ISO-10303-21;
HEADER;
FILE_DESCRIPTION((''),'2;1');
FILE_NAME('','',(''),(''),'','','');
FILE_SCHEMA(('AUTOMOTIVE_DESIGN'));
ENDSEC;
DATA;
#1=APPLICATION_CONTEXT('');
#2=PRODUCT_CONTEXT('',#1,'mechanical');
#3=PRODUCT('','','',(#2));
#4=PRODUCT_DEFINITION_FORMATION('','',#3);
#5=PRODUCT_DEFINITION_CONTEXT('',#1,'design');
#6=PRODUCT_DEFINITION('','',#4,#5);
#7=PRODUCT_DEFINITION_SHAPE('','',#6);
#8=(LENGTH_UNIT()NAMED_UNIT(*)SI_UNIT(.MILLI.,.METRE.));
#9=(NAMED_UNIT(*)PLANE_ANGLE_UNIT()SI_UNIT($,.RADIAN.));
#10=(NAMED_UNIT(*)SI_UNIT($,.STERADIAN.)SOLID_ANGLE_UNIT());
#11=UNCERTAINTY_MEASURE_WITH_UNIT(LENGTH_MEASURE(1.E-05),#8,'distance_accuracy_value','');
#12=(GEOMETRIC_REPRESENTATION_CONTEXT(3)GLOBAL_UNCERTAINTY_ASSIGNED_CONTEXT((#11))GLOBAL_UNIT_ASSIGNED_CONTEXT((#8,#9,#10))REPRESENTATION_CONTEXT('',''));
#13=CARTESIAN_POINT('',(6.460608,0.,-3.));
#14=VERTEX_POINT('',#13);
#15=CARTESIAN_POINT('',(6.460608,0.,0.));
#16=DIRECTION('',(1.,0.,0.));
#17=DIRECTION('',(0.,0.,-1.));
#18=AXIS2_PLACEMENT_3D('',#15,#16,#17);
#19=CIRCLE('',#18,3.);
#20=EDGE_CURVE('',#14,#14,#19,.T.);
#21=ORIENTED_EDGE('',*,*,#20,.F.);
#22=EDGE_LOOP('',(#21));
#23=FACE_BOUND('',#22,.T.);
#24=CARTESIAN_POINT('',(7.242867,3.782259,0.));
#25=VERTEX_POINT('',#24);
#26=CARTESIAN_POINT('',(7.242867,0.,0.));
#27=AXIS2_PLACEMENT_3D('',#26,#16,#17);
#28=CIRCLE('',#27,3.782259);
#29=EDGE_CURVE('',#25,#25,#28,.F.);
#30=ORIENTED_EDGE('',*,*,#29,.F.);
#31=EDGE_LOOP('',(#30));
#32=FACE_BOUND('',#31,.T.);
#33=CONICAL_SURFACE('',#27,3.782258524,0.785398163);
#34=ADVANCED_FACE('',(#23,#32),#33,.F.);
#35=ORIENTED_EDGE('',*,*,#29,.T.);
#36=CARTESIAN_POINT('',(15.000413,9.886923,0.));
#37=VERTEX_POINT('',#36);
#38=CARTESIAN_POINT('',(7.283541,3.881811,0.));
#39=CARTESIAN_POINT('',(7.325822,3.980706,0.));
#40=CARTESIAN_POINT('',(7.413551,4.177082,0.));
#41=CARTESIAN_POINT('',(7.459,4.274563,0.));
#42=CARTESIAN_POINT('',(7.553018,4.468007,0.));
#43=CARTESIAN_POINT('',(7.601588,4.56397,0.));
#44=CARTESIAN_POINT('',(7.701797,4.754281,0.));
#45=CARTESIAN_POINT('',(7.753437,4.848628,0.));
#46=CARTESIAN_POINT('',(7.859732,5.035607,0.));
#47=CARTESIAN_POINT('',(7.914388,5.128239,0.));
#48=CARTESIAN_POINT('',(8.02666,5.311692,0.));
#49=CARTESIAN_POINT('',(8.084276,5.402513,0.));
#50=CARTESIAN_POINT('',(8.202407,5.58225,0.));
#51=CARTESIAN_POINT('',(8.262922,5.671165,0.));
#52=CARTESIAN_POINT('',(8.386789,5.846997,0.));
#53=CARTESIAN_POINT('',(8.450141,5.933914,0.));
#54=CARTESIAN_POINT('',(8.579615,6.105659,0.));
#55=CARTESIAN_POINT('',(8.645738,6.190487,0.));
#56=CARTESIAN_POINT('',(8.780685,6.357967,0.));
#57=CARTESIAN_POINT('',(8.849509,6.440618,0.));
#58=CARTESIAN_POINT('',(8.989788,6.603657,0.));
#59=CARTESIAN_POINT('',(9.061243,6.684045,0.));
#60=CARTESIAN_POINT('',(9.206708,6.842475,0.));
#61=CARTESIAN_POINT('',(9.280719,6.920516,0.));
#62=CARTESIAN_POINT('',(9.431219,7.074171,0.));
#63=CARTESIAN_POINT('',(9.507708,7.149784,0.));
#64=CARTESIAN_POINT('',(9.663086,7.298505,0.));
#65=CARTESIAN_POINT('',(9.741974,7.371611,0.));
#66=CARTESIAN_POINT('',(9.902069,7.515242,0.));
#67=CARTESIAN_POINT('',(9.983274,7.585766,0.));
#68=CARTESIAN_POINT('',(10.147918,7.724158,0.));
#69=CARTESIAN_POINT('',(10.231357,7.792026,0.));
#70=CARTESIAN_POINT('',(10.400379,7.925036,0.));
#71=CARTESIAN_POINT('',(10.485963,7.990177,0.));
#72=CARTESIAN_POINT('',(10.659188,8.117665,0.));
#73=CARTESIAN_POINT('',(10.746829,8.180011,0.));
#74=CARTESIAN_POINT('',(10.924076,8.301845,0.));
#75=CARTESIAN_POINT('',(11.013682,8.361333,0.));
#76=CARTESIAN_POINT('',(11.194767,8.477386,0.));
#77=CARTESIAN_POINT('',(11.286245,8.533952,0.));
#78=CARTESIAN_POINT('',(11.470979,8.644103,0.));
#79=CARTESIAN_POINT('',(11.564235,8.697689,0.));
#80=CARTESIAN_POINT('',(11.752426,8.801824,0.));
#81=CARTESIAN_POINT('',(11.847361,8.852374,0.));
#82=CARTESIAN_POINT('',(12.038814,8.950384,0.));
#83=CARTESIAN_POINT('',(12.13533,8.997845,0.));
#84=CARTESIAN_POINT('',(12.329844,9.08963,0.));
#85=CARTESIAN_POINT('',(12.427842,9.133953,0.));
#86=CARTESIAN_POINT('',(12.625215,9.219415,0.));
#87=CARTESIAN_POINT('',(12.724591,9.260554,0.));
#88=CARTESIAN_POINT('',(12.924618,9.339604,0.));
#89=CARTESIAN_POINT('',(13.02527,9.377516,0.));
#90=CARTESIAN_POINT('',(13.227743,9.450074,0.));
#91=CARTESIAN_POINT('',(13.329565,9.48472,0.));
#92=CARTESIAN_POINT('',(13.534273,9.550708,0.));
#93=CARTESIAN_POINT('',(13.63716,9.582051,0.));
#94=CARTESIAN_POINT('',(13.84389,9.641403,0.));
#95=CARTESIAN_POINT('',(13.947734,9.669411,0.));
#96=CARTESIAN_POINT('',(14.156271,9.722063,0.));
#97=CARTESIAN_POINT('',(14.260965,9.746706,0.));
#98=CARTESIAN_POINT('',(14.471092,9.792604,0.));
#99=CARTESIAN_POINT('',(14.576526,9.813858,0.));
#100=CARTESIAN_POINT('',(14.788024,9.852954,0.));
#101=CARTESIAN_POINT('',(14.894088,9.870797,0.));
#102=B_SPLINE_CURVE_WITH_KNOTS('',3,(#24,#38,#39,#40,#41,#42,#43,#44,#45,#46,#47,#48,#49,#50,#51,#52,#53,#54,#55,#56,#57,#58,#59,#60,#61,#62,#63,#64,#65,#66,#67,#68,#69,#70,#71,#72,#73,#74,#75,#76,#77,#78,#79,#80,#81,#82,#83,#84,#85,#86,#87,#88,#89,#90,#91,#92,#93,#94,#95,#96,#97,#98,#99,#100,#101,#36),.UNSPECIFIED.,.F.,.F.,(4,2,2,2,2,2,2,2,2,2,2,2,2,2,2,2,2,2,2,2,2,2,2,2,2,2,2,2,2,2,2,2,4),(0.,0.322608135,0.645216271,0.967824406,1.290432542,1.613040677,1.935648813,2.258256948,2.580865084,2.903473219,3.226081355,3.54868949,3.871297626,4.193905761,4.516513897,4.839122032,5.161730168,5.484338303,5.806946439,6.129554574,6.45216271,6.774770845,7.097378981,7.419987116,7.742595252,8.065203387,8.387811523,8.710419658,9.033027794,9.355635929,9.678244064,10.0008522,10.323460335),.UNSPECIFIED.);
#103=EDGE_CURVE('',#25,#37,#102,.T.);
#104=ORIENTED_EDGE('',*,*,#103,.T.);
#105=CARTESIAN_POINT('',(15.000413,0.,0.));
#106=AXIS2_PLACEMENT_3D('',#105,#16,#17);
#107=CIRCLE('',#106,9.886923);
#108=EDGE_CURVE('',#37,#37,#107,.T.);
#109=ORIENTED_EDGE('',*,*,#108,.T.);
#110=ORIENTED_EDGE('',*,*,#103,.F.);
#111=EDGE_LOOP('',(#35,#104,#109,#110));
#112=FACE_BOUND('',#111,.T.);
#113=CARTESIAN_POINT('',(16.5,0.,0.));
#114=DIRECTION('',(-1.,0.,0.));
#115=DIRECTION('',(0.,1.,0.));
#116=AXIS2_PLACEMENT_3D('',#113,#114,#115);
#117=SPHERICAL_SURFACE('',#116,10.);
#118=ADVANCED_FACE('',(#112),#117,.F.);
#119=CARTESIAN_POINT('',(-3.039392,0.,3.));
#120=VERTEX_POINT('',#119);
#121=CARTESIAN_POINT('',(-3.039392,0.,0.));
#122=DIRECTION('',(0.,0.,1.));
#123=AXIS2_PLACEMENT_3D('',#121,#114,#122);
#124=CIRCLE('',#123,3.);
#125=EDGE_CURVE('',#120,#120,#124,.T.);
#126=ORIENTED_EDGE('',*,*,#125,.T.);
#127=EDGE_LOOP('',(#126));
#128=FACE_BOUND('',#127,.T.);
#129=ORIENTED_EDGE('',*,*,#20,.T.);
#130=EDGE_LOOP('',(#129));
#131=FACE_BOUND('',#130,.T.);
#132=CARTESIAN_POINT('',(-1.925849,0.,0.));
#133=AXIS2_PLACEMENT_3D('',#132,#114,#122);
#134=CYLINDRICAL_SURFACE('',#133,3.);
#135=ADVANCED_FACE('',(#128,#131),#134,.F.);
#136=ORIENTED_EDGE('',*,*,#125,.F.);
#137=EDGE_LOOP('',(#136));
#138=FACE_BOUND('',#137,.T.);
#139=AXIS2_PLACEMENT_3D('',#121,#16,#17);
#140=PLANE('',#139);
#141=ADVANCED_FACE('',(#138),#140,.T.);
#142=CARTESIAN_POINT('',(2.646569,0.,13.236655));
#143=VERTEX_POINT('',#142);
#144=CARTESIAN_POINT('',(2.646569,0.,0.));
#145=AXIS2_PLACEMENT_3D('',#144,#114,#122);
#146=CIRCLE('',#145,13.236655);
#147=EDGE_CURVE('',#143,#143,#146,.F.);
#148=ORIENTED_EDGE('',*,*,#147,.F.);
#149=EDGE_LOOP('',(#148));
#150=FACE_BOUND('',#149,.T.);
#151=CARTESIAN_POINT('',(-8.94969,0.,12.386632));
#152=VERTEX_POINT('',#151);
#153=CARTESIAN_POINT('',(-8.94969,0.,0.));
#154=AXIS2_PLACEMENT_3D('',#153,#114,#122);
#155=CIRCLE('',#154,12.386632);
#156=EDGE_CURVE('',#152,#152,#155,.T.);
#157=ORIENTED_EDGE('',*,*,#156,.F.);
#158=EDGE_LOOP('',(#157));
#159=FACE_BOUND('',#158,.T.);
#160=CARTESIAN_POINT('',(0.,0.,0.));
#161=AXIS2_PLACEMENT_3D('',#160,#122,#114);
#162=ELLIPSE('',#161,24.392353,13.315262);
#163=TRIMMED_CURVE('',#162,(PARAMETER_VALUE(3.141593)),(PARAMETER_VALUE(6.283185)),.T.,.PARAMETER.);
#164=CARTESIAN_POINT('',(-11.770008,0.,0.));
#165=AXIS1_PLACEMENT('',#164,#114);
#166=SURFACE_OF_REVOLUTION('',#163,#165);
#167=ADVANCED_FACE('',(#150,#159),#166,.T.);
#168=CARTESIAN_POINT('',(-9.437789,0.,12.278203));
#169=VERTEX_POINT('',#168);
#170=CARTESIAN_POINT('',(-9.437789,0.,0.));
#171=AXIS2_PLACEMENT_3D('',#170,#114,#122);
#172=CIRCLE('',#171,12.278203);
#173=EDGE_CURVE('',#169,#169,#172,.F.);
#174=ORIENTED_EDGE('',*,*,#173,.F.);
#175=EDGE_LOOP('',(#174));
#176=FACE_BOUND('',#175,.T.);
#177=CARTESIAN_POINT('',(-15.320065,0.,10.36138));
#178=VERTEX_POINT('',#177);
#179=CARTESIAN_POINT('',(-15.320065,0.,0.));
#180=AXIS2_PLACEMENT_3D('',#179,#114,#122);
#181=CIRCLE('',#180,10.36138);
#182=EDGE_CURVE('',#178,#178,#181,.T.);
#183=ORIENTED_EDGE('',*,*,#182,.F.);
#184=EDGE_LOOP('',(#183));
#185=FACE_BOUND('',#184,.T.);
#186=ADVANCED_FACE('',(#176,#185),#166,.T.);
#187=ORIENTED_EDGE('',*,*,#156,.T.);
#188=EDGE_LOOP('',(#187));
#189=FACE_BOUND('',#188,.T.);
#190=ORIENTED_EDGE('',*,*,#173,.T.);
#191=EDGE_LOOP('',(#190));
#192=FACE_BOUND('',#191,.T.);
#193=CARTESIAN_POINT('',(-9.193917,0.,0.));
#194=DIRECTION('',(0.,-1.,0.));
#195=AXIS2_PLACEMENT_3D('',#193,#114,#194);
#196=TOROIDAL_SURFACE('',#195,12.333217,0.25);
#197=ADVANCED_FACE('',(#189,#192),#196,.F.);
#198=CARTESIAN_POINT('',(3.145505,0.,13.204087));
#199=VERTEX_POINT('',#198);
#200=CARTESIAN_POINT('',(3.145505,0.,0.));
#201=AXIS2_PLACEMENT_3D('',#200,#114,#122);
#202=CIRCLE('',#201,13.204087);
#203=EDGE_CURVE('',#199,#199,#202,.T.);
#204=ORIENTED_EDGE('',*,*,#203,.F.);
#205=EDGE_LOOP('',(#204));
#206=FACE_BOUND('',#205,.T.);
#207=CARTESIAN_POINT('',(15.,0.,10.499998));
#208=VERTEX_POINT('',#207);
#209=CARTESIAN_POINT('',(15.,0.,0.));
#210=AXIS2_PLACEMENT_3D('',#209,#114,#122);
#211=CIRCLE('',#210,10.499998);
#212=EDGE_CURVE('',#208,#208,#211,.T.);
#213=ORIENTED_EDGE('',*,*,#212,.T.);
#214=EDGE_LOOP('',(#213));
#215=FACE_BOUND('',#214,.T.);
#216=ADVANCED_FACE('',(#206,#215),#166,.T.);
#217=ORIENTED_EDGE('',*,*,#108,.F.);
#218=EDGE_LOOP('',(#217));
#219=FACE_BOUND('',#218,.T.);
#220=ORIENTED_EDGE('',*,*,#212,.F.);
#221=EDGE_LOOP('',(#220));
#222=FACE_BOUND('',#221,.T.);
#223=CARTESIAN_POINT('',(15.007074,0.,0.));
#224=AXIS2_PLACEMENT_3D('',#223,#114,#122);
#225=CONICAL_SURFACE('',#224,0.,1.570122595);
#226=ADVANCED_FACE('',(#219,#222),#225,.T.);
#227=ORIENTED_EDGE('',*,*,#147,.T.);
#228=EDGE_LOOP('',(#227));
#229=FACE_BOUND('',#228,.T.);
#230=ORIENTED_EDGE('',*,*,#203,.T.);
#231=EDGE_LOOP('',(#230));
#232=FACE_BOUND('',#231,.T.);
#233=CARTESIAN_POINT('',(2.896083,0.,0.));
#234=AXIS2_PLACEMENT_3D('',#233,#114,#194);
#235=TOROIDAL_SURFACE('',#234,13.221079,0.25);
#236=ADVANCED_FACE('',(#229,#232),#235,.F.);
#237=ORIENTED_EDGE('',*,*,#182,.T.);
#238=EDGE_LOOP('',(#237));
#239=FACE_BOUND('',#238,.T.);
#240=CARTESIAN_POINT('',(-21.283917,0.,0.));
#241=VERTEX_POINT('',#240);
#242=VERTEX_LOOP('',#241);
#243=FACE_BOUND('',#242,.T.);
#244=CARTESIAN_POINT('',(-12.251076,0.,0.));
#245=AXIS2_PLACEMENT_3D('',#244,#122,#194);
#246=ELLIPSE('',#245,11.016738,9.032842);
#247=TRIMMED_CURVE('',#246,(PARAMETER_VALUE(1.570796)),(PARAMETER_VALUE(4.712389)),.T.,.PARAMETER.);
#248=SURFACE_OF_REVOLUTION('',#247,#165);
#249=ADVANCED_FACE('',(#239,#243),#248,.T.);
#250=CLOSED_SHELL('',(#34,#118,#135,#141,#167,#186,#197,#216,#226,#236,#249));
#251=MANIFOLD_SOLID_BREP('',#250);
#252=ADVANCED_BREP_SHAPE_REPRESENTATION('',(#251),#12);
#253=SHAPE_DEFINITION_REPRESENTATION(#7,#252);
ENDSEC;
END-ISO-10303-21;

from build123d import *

# Parameters (mm, degrees)
SKETCH24_R = 0.25


with BuildPart() as part:
    # Sketch1 → Revolve2 (revolve)
    with BuildSketch(Plane.XY, mode=Mode.PRIVATE) as revolve2_sk:
        with BuildLine():
            Line((-15.007074186, 0), (15.007074186, 0))
            Line((15.007074186, 0), (15, 10.499997617))
            add(Edge.make_bspline(
                [(15, 10.499997617), (-0.260765985, 16.996362914), (-15.320064817, 10.361380419)],
                knots=[4.050070464, 4.050070464, 4.050070464, 5.391457343, 5.391457343, 5.391457343], degree=2, weights=[1, 0.783390861, 1]))
            add(Edge.make_bspline(
                [(-15.320064817, 10.361380419), (-21.283917109, 7.733764353), (-21.283917109, 0)],
                knots=[3.488253299, 3.488253299, 3.488253299, 4.71238898, 4.71238898, 4.71238898], degree=2, weights=[1, 0.818461668, 1]))
            Line((-21.283917109, 0), (-15.007074186, 0))
        make_face()
    revolve(revolve2_sk.sketch.rotate(Axis((-11.770008151, 0, 0), (1, 0, 0)), 90), axis=Axis((-11.770008151, 0, 0), (1, 0, 0)))

    # Sketch16 → Cut-Revolve1 (revolve, cut)
    with BuildSketch(Plane.XY, mode=Mode.PRIVATE) as cut_revolve1_sk:
        with BuildLine():
            Line((16.5, 0), (16.5, 10))
            ThreePointArc((16.5, 10), (10.583920217, 8.062257748), (6.960607986, 3))
            Line((6.960607986, 3), (-3.039392014, 3))
            Line((-3.039392014, 3), (-3.039392014, 0))
            Line((-3.039392014, 0), (16.5, 0))
        make_face()
    revolve(cut_revolve1_sk.sketch.rotate(Axis((-1.925849318, 0, 0), (1, 0, 0)), 90), axis=Axis((-1.925849318, 0, 0), (1, 0, 0)), mode=Mode.SUBTRACT)

    # Chamfer1: read off the stored shape, not the designer's step
    # Chamfer1 outline → Chamfer1 (revolve, cut)
    with BuildSketch(Plane.YX):
        Polygon((3, 7.24286651), (3, 6.460607986), (3.782258524, 7.24286651), align=None)
    revolve(axis=Axis((0, 0, 0), (1, 0, 0)), mode=Mode.SUBTRACT)

    # Sketch24 → Cut-Revolve2 (revolve, cut)
    with BuildSketch(Plane.XY):
        with Locations((2.896082891, 13.22107924)):
            Circle(SKETCH24_R)
        with Locations((-9.193917109, 12.333216872)):
            Circle(SKETCH24_R)
    revolve(axis=Axis((-21.283917109, 0, 0), (1, 0, 0)), mode=Mode.SUBTRACT)


solid = part.part
